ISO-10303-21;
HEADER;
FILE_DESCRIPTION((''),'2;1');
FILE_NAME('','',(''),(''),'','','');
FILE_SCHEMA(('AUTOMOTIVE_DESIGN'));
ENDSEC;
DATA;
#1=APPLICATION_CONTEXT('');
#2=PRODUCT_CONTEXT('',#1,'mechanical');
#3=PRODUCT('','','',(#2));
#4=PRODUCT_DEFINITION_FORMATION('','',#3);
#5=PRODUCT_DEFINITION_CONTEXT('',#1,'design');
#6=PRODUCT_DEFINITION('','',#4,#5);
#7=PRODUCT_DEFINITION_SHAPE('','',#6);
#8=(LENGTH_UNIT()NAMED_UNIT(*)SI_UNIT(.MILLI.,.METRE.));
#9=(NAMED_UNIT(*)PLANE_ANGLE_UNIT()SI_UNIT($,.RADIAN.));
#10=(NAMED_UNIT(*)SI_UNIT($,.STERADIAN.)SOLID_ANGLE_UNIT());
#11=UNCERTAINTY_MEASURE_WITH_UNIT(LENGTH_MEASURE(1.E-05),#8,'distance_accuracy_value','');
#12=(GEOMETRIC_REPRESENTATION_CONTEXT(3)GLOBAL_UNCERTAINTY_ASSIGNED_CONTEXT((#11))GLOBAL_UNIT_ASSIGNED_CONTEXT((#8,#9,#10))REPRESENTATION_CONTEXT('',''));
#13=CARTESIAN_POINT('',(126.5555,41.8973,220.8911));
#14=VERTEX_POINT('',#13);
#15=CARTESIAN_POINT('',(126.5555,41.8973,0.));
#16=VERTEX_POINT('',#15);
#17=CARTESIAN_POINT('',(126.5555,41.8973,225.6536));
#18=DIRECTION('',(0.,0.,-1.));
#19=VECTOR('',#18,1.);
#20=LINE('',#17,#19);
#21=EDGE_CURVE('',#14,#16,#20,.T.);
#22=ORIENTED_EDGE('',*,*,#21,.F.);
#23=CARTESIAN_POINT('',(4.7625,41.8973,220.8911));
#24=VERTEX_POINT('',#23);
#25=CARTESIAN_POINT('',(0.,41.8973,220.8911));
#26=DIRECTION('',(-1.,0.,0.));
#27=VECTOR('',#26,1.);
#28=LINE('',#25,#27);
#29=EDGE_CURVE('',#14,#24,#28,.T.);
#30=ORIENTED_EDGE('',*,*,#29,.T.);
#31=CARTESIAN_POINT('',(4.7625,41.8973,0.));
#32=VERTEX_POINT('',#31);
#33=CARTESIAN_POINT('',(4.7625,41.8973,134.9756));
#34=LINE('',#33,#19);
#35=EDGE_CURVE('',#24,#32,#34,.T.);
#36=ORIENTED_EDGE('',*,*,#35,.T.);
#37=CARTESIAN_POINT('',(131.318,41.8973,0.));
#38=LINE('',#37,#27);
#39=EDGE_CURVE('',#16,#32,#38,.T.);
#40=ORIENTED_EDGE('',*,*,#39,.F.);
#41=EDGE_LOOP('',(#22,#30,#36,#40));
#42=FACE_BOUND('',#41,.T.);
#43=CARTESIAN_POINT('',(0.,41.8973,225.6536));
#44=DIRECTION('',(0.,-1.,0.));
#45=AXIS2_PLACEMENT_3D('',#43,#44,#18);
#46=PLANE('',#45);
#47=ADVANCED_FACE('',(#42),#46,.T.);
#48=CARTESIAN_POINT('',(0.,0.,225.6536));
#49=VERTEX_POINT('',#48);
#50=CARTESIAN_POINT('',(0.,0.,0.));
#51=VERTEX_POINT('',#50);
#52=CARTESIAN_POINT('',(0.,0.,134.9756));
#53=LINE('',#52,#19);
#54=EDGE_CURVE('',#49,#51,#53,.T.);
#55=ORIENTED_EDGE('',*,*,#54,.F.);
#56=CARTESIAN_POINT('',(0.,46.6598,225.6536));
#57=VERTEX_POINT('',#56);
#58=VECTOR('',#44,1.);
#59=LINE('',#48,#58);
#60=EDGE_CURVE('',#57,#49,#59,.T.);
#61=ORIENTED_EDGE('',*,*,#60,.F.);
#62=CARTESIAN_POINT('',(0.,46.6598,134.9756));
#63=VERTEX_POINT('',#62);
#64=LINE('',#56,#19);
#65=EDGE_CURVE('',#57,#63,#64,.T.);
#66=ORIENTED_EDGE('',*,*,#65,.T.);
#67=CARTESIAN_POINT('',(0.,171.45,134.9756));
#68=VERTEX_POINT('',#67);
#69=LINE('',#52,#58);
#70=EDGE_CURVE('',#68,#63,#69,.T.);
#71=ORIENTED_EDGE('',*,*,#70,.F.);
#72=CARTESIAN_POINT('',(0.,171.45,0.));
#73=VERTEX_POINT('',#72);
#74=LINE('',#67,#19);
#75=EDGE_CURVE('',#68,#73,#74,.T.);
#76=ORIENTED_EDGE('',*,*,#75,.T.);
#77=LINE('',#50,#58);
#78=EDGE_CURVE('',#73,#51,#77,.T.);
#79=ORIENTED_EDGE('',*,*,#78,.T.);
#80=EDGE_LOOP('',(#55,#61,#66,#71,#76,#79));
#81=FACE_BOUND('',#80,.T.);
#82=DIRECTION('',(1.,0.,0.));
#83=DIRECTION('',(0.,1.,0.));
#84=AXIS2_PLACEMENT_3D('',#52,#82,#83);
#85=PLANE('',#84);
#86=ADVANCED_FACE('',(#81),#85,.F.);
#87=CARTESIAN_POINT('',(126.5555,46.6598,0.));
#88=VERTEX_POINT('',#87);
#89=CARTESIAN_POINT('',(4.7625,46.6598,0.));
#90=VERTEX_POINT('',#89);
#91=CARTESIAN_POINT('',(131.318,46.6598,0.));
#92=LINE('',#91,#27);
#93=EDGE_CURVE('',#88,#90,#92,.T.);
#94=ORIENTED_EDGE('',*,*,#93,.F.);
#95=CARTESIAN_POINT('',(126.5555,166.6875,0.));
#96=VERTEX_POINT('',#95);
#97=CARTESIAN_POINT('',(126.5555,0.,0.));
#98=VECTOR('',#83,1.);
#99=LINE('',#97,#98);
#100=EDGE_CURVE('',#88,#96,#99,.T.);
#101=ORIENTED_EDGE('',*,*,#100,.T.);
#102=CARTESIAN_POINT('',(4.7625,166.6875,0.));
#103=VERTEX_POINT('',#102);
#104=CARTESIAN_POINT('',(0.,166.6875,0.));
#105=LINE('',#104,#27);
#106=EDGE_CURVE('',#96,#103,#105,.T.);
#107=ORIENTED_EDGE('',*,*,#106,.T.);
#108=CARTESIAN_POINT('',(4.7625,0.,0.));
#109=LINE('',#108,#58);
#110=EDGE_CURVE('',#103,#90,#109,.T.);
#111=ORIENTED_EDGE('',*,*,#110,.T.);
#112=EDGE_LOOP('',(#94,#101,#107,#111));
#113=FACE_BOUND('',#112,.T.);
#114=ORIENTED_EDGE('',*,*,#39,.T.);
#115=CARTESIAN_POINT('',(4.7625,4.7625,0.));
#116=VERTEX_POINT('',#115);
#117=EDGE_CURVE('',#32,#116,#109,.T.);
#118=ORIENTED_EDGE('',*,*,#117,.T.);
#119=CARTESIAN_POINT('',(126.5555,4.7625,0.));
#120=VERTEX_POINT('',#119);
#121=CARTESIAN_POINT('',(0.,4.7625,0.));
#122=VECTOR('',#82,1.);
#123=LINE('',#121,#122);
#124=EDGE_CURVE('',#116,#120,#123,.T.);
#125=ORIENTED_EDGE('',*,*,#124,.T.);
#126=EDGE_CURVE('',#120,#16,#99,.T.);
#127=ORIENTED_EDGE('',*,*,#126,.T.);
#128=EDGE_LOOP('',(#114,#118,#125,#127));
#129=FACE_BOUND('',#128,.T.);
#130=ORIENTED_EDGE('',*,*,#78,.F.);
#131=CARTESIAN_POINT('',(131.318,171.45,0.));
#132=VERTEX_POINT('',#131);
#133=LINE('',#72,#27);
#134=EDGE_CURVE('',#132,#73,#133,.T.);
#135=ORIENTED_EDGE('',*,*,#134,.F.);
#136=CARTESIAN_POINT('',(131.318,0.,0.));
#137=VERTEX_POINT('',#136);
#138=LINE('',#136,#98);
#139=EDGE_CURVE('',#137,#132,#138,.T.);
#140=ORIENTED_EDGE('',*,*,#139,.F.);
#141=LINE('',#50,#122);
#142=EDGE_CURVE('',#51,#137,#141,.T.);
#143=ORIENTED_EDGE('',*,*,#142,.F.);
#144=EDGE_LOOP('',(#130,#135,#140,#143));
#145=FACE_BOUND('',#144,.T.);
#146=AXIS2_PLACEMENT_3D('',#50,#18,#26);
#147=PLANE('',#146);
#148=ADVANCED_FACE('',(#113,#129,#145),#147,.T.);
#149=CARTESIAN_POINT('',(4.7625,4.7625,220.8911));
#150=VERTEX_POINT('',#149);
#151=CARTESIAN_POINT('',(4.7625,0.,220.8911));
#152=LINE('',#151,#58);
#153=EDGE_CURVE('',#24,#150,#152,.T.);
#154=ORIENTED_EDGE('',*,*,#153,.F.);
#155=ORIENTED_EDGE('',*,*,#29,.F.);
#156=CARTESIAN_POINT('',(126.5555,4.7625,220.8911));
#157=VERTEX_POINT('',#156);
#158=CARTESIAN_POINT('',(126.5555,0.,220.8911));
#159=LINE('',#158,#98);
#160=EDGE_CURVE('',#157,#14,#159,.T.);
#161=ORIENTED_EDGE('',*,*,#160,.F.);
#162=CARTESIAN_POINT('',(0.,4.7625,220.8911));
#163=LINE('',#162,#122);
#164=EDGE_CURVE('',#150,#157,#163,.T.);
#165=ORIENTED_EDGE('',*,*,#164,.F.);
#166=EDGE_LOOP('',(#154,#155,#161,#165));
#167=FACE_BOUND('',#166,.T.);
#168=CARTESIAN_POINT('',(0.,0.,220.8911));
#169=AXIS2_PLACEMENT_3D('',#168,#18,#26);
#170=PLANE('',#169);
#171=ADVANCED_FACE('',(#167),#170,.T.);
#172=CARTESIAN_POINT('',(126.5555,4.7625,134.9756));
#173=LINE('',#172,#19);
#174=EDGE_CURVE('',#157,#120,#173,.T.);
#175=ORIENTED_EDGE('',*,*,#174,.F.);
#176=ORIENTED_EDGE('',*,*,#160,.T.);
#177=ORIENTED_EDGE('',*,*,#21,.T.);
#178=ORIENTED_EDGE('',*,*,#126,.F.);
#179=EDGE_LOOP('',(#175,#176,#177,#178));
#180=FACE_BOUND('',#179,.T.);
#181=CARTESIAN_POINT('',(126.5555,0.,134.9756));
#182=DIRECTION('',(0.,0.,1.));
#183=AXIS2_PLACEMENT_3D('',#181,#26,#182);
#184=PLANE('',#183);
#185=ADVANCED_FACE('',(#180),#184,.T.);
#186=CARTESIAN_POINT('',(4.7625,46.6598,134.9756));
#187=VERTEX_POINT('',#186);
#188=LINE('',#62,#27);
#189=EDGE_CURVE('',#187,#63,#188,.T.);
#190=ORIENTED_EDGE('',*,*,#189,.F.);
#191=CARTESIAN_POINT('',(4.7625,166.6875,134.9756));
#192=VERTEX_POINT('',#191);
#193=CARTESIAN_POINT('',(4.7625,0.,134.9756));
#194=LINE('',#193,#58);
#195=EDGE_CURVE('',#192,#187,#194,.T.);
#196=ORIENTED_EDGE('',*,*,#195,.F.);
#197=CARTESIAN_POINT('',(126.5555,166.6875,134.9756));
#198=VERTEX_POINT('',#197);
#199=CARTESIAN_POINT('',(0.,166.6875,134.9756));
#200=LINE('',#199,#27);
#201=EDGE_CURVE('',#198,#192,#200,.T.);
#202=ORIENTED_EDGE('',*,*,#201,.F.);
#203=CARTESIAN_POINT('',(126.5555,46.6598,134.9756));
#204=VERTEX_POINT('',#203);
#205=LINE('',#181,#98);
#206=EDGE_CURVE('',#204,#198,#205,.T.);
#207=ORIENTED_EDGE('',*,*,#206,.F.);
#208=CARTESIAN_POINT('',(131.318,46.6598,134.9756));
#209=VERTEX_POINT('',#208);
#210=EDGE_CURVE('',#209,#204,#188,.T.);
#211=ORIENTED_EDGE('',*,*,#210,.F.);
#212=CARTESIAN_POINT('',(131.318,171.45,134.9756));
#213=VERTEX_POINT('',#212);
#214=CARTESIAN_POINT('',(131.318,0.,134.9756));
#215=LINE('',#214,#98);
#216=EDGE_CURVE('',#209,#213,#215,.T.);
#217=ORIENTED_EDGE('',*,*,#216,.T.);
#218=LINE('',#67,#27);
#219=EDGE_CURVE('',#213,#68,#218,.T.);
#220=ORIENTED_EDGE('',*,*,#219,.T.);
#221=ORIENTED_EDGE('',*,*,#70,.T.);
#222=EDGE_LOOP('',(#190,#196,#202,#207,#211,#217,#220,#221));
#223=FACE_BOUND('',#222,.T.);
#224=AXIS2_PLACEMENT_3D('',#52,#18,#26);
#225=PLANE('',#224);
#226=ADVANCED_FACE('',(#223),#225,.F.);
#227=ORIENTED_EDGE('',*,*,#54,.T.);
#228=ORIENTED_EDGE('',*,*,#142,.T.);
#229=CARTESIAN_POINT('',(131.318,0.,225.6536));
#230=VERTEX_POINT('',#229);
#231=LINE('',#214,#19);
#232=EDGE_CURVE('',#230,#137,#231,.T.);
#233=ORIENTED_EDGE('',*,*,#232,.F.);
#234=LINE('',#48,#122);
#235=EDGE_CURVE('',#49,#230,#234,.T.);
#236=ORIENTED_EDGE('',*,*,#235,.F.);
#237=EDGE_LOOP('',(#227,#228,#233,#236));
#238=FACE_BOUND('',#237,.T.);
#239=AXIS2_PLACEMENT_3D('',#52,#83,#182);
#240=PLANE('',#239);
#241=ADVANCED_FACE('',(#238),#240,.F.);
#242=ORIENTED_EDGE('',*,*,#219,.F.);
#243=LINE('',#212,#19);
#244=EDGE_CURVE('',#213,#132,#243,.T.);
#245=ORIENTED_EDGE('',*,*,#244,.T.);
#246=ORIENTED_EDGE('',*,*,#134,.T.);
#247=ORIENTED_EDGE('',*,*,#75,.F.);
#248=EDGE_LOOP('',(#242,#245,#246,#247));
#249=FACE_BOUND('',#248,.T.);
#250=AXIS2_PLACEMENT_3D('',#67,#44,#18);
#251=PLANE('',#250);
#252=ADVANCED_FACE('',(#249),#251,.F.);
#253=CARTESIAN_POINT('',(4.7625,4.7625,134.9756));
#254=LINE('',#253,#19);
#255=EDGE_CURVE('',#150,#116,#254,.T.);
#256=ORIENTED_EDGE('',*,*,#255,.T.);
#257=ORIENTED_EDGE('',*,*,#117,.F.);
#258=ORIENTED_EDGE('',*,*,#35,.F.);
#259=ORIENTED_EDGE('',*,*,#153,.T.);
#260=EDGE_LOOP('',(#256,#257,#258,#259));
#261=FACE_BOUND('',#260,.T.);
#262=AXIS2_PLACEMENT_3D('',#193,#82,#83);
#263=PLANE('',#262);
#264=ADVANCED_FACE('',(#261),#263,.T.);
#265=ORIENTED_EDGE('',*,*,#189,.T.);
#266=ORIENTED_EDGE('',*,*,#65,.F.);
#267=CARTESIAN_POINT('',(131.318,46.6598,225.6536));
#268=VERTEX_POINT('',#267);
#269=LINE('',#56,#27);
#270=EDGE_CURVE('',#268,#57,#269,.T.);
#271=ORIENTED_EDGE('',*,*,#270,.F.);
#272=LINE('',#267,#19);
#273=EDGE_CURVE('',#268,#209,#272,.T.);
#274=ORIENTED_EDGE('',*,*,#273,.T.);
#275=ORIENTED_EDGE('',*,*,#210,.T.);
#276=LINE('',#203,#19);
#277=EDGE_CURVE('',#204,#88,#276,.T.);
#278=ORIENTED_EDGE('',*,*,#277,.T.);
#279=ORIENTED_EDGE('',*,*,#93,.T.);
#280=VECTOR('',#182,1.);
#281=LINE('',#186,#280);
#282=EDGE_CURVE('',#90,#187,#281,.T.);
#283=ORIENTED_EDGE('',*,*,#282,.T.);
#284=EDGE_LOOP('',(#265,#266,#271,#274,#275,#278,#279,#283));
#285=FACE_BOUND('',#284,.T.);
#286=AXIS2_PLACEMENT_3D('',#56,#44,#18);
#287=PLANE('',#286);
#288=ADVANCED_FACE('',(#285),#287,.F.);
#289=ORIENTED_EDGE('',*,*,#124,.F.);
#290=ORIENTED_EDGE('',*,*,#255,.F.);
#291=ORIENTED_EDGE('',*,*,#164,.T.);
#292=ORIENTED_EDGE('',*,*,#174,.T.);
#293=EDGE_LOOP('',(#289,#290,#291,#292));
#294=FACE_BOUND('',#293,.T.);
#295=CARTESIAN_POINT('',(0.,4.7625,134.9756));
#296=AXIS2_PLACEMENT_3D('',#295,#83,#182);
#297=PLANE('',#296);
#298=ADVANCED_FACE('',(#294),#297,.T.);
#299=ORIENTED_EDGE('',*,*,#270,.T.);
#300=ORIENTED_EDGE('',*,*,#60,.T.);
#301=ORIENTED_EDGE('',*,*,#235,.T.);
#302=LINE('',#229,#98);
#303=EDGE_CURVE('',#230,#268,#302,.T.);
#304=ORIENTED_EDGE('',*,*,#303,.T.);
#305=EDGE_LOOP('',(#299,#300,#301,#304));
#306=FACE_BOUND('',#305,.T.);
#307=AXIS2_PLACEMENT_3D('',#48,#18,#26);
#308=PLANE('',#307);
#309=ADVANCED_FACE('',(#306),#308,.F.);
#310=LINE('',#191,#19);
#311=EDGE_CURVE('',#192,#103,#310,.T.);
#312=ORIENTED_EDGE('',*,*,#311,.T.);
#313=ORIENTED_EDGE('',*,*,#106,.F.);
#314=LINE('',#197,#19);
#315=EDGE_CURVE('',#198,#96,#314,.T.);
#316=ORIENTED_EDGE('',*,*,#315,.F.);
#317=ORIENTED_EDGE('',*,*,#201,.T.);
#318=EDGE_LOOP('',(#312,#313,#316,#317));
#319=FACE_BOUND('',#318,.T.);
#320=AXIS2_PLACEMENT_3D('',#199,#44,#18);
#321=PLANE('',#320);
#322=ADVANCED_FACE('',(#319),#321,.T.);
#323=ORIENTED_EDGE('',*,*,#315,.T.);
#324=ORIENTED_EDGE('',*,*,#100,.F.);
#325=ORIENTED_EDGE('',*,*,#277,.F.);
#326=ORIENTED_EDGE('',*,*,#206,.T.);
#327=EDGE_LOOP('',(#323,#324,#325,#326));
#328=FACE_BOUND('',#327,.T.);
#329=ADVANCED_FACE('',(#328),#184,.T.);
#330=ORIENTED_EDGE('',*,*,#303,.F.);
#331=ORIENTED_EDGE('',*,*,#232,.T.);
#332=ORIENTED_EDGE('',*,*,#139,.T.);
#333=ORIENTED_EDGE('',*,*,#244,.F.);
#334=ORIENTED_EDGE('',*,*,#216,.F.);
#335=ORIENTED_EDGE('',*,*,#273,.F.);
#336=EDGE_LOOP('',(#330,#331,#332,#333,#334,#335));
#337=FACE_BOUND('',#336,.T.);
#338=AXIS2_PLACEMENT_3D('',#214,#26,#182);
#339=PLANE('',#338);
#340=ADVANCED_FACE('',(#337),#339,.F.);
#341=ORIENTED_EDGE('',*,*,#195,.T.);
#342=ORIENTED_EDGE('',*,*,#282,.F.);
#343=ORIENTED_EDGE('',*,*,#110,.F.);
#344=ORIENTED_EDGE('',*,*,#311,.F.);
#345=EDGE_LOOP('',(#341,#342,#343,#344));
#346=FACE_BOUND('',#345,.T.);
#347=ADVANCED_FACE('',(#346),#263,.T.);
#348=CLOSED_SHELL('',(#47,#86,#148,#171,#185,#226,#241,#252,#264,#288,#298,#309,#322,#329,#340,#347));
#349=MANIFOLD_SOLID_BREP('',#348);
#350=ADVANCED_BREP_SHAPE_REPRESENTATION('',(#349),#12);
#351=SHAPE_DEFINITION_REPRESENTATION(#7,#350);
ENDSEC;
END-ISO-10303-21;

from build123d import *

# Parameters (mm, degrees)
SKETCH1_W           = 131.318
SKETCH1_H           = 171.45
BOSS_EXTRUDE1_DEPTH = 134.9756
SKETCH2_W           = 131.318
SKETCH2_H           = 46.6598
BOSS_EXTRUDE2_DEPTH = 90.678
SHELL1_OUTLINE_W    = 121.793
SHELL1_OUTLINE_H    = 161.925
SHELL1_DEPTH        = 134.9756
SHELL1_START        = 134.9756
SHELL1_2_OUTLINE_W  = 121.793
SHELL1_2_OUTLINE_H  = 37.1348
SHELL1_2_DEPTH      = 85.9155
SKETCH3_W           = 131.318
SKETCH3_H           = 134.9756
BOSS_EXTRUDE3_DEPTH = 4.7625


# Read off the part's stored shape, not the designer's step: Shell1
with BuildPart() as part:
    # Sketch1 → Boss-Extrude1 (new body)
    with BuildSketch(Plane.XY):
        with Locations((65.659, 85.725)):
            Rectangle(SKETCH1_W, SKETCH1_H)
    extrude(amount=BOSS_EXTRUDE1_DEPTH)

    # Sketch2 → Boss-Extrude2 (add)
    with BuildSketch(Plane.XY.offset(134.9756)):
        with Locations((65.659, 23.3299)):
            Rectangle(SKETCH2_W, SKETCH2_H)
    extrude(amount=BOSS_EXTRUDE2_DEPTH)

    # Shell1 outline → Shell1 (cut)
    with BuildSketch(Plane.XY):
        with Locations((65.659, 85.725)):
            Rectangle(SHELL1_OUTLINE_W, SHELL1_OUTLINE_H)
    extrude(amount=SHELL1_DEPTH, mode=Mode.SUBTRACT)

    # Shell1 2 outline → Shell1 2 (cut)
    with BuildSketch(Plane.XY.offset(SHELL1_START)):
        with Locations((65.659, 23.3299)):
            Rectangle(SHELL1_2_OUTLINE_W, SHELL1_2_OUTLINE_H)
    extrude(amount=SHELL1_2_DEPTH, mode=Mode.SUBTRACT)

    # Sketch3 → Boss-Extrude3 (add)
    with BuildSketch(Plane(origin=(0, 46.6598, 0), x_dir=(1, 0, 0), z_dir=(0, 1, 0))):
        with Locations((65.659, -67.4878)):
            Rectangle(SKETCH3_W, SKETCH3_H)
    extrude(amount=-BOSS_EXTRUDE3_DEPTH)


solid = part.part
